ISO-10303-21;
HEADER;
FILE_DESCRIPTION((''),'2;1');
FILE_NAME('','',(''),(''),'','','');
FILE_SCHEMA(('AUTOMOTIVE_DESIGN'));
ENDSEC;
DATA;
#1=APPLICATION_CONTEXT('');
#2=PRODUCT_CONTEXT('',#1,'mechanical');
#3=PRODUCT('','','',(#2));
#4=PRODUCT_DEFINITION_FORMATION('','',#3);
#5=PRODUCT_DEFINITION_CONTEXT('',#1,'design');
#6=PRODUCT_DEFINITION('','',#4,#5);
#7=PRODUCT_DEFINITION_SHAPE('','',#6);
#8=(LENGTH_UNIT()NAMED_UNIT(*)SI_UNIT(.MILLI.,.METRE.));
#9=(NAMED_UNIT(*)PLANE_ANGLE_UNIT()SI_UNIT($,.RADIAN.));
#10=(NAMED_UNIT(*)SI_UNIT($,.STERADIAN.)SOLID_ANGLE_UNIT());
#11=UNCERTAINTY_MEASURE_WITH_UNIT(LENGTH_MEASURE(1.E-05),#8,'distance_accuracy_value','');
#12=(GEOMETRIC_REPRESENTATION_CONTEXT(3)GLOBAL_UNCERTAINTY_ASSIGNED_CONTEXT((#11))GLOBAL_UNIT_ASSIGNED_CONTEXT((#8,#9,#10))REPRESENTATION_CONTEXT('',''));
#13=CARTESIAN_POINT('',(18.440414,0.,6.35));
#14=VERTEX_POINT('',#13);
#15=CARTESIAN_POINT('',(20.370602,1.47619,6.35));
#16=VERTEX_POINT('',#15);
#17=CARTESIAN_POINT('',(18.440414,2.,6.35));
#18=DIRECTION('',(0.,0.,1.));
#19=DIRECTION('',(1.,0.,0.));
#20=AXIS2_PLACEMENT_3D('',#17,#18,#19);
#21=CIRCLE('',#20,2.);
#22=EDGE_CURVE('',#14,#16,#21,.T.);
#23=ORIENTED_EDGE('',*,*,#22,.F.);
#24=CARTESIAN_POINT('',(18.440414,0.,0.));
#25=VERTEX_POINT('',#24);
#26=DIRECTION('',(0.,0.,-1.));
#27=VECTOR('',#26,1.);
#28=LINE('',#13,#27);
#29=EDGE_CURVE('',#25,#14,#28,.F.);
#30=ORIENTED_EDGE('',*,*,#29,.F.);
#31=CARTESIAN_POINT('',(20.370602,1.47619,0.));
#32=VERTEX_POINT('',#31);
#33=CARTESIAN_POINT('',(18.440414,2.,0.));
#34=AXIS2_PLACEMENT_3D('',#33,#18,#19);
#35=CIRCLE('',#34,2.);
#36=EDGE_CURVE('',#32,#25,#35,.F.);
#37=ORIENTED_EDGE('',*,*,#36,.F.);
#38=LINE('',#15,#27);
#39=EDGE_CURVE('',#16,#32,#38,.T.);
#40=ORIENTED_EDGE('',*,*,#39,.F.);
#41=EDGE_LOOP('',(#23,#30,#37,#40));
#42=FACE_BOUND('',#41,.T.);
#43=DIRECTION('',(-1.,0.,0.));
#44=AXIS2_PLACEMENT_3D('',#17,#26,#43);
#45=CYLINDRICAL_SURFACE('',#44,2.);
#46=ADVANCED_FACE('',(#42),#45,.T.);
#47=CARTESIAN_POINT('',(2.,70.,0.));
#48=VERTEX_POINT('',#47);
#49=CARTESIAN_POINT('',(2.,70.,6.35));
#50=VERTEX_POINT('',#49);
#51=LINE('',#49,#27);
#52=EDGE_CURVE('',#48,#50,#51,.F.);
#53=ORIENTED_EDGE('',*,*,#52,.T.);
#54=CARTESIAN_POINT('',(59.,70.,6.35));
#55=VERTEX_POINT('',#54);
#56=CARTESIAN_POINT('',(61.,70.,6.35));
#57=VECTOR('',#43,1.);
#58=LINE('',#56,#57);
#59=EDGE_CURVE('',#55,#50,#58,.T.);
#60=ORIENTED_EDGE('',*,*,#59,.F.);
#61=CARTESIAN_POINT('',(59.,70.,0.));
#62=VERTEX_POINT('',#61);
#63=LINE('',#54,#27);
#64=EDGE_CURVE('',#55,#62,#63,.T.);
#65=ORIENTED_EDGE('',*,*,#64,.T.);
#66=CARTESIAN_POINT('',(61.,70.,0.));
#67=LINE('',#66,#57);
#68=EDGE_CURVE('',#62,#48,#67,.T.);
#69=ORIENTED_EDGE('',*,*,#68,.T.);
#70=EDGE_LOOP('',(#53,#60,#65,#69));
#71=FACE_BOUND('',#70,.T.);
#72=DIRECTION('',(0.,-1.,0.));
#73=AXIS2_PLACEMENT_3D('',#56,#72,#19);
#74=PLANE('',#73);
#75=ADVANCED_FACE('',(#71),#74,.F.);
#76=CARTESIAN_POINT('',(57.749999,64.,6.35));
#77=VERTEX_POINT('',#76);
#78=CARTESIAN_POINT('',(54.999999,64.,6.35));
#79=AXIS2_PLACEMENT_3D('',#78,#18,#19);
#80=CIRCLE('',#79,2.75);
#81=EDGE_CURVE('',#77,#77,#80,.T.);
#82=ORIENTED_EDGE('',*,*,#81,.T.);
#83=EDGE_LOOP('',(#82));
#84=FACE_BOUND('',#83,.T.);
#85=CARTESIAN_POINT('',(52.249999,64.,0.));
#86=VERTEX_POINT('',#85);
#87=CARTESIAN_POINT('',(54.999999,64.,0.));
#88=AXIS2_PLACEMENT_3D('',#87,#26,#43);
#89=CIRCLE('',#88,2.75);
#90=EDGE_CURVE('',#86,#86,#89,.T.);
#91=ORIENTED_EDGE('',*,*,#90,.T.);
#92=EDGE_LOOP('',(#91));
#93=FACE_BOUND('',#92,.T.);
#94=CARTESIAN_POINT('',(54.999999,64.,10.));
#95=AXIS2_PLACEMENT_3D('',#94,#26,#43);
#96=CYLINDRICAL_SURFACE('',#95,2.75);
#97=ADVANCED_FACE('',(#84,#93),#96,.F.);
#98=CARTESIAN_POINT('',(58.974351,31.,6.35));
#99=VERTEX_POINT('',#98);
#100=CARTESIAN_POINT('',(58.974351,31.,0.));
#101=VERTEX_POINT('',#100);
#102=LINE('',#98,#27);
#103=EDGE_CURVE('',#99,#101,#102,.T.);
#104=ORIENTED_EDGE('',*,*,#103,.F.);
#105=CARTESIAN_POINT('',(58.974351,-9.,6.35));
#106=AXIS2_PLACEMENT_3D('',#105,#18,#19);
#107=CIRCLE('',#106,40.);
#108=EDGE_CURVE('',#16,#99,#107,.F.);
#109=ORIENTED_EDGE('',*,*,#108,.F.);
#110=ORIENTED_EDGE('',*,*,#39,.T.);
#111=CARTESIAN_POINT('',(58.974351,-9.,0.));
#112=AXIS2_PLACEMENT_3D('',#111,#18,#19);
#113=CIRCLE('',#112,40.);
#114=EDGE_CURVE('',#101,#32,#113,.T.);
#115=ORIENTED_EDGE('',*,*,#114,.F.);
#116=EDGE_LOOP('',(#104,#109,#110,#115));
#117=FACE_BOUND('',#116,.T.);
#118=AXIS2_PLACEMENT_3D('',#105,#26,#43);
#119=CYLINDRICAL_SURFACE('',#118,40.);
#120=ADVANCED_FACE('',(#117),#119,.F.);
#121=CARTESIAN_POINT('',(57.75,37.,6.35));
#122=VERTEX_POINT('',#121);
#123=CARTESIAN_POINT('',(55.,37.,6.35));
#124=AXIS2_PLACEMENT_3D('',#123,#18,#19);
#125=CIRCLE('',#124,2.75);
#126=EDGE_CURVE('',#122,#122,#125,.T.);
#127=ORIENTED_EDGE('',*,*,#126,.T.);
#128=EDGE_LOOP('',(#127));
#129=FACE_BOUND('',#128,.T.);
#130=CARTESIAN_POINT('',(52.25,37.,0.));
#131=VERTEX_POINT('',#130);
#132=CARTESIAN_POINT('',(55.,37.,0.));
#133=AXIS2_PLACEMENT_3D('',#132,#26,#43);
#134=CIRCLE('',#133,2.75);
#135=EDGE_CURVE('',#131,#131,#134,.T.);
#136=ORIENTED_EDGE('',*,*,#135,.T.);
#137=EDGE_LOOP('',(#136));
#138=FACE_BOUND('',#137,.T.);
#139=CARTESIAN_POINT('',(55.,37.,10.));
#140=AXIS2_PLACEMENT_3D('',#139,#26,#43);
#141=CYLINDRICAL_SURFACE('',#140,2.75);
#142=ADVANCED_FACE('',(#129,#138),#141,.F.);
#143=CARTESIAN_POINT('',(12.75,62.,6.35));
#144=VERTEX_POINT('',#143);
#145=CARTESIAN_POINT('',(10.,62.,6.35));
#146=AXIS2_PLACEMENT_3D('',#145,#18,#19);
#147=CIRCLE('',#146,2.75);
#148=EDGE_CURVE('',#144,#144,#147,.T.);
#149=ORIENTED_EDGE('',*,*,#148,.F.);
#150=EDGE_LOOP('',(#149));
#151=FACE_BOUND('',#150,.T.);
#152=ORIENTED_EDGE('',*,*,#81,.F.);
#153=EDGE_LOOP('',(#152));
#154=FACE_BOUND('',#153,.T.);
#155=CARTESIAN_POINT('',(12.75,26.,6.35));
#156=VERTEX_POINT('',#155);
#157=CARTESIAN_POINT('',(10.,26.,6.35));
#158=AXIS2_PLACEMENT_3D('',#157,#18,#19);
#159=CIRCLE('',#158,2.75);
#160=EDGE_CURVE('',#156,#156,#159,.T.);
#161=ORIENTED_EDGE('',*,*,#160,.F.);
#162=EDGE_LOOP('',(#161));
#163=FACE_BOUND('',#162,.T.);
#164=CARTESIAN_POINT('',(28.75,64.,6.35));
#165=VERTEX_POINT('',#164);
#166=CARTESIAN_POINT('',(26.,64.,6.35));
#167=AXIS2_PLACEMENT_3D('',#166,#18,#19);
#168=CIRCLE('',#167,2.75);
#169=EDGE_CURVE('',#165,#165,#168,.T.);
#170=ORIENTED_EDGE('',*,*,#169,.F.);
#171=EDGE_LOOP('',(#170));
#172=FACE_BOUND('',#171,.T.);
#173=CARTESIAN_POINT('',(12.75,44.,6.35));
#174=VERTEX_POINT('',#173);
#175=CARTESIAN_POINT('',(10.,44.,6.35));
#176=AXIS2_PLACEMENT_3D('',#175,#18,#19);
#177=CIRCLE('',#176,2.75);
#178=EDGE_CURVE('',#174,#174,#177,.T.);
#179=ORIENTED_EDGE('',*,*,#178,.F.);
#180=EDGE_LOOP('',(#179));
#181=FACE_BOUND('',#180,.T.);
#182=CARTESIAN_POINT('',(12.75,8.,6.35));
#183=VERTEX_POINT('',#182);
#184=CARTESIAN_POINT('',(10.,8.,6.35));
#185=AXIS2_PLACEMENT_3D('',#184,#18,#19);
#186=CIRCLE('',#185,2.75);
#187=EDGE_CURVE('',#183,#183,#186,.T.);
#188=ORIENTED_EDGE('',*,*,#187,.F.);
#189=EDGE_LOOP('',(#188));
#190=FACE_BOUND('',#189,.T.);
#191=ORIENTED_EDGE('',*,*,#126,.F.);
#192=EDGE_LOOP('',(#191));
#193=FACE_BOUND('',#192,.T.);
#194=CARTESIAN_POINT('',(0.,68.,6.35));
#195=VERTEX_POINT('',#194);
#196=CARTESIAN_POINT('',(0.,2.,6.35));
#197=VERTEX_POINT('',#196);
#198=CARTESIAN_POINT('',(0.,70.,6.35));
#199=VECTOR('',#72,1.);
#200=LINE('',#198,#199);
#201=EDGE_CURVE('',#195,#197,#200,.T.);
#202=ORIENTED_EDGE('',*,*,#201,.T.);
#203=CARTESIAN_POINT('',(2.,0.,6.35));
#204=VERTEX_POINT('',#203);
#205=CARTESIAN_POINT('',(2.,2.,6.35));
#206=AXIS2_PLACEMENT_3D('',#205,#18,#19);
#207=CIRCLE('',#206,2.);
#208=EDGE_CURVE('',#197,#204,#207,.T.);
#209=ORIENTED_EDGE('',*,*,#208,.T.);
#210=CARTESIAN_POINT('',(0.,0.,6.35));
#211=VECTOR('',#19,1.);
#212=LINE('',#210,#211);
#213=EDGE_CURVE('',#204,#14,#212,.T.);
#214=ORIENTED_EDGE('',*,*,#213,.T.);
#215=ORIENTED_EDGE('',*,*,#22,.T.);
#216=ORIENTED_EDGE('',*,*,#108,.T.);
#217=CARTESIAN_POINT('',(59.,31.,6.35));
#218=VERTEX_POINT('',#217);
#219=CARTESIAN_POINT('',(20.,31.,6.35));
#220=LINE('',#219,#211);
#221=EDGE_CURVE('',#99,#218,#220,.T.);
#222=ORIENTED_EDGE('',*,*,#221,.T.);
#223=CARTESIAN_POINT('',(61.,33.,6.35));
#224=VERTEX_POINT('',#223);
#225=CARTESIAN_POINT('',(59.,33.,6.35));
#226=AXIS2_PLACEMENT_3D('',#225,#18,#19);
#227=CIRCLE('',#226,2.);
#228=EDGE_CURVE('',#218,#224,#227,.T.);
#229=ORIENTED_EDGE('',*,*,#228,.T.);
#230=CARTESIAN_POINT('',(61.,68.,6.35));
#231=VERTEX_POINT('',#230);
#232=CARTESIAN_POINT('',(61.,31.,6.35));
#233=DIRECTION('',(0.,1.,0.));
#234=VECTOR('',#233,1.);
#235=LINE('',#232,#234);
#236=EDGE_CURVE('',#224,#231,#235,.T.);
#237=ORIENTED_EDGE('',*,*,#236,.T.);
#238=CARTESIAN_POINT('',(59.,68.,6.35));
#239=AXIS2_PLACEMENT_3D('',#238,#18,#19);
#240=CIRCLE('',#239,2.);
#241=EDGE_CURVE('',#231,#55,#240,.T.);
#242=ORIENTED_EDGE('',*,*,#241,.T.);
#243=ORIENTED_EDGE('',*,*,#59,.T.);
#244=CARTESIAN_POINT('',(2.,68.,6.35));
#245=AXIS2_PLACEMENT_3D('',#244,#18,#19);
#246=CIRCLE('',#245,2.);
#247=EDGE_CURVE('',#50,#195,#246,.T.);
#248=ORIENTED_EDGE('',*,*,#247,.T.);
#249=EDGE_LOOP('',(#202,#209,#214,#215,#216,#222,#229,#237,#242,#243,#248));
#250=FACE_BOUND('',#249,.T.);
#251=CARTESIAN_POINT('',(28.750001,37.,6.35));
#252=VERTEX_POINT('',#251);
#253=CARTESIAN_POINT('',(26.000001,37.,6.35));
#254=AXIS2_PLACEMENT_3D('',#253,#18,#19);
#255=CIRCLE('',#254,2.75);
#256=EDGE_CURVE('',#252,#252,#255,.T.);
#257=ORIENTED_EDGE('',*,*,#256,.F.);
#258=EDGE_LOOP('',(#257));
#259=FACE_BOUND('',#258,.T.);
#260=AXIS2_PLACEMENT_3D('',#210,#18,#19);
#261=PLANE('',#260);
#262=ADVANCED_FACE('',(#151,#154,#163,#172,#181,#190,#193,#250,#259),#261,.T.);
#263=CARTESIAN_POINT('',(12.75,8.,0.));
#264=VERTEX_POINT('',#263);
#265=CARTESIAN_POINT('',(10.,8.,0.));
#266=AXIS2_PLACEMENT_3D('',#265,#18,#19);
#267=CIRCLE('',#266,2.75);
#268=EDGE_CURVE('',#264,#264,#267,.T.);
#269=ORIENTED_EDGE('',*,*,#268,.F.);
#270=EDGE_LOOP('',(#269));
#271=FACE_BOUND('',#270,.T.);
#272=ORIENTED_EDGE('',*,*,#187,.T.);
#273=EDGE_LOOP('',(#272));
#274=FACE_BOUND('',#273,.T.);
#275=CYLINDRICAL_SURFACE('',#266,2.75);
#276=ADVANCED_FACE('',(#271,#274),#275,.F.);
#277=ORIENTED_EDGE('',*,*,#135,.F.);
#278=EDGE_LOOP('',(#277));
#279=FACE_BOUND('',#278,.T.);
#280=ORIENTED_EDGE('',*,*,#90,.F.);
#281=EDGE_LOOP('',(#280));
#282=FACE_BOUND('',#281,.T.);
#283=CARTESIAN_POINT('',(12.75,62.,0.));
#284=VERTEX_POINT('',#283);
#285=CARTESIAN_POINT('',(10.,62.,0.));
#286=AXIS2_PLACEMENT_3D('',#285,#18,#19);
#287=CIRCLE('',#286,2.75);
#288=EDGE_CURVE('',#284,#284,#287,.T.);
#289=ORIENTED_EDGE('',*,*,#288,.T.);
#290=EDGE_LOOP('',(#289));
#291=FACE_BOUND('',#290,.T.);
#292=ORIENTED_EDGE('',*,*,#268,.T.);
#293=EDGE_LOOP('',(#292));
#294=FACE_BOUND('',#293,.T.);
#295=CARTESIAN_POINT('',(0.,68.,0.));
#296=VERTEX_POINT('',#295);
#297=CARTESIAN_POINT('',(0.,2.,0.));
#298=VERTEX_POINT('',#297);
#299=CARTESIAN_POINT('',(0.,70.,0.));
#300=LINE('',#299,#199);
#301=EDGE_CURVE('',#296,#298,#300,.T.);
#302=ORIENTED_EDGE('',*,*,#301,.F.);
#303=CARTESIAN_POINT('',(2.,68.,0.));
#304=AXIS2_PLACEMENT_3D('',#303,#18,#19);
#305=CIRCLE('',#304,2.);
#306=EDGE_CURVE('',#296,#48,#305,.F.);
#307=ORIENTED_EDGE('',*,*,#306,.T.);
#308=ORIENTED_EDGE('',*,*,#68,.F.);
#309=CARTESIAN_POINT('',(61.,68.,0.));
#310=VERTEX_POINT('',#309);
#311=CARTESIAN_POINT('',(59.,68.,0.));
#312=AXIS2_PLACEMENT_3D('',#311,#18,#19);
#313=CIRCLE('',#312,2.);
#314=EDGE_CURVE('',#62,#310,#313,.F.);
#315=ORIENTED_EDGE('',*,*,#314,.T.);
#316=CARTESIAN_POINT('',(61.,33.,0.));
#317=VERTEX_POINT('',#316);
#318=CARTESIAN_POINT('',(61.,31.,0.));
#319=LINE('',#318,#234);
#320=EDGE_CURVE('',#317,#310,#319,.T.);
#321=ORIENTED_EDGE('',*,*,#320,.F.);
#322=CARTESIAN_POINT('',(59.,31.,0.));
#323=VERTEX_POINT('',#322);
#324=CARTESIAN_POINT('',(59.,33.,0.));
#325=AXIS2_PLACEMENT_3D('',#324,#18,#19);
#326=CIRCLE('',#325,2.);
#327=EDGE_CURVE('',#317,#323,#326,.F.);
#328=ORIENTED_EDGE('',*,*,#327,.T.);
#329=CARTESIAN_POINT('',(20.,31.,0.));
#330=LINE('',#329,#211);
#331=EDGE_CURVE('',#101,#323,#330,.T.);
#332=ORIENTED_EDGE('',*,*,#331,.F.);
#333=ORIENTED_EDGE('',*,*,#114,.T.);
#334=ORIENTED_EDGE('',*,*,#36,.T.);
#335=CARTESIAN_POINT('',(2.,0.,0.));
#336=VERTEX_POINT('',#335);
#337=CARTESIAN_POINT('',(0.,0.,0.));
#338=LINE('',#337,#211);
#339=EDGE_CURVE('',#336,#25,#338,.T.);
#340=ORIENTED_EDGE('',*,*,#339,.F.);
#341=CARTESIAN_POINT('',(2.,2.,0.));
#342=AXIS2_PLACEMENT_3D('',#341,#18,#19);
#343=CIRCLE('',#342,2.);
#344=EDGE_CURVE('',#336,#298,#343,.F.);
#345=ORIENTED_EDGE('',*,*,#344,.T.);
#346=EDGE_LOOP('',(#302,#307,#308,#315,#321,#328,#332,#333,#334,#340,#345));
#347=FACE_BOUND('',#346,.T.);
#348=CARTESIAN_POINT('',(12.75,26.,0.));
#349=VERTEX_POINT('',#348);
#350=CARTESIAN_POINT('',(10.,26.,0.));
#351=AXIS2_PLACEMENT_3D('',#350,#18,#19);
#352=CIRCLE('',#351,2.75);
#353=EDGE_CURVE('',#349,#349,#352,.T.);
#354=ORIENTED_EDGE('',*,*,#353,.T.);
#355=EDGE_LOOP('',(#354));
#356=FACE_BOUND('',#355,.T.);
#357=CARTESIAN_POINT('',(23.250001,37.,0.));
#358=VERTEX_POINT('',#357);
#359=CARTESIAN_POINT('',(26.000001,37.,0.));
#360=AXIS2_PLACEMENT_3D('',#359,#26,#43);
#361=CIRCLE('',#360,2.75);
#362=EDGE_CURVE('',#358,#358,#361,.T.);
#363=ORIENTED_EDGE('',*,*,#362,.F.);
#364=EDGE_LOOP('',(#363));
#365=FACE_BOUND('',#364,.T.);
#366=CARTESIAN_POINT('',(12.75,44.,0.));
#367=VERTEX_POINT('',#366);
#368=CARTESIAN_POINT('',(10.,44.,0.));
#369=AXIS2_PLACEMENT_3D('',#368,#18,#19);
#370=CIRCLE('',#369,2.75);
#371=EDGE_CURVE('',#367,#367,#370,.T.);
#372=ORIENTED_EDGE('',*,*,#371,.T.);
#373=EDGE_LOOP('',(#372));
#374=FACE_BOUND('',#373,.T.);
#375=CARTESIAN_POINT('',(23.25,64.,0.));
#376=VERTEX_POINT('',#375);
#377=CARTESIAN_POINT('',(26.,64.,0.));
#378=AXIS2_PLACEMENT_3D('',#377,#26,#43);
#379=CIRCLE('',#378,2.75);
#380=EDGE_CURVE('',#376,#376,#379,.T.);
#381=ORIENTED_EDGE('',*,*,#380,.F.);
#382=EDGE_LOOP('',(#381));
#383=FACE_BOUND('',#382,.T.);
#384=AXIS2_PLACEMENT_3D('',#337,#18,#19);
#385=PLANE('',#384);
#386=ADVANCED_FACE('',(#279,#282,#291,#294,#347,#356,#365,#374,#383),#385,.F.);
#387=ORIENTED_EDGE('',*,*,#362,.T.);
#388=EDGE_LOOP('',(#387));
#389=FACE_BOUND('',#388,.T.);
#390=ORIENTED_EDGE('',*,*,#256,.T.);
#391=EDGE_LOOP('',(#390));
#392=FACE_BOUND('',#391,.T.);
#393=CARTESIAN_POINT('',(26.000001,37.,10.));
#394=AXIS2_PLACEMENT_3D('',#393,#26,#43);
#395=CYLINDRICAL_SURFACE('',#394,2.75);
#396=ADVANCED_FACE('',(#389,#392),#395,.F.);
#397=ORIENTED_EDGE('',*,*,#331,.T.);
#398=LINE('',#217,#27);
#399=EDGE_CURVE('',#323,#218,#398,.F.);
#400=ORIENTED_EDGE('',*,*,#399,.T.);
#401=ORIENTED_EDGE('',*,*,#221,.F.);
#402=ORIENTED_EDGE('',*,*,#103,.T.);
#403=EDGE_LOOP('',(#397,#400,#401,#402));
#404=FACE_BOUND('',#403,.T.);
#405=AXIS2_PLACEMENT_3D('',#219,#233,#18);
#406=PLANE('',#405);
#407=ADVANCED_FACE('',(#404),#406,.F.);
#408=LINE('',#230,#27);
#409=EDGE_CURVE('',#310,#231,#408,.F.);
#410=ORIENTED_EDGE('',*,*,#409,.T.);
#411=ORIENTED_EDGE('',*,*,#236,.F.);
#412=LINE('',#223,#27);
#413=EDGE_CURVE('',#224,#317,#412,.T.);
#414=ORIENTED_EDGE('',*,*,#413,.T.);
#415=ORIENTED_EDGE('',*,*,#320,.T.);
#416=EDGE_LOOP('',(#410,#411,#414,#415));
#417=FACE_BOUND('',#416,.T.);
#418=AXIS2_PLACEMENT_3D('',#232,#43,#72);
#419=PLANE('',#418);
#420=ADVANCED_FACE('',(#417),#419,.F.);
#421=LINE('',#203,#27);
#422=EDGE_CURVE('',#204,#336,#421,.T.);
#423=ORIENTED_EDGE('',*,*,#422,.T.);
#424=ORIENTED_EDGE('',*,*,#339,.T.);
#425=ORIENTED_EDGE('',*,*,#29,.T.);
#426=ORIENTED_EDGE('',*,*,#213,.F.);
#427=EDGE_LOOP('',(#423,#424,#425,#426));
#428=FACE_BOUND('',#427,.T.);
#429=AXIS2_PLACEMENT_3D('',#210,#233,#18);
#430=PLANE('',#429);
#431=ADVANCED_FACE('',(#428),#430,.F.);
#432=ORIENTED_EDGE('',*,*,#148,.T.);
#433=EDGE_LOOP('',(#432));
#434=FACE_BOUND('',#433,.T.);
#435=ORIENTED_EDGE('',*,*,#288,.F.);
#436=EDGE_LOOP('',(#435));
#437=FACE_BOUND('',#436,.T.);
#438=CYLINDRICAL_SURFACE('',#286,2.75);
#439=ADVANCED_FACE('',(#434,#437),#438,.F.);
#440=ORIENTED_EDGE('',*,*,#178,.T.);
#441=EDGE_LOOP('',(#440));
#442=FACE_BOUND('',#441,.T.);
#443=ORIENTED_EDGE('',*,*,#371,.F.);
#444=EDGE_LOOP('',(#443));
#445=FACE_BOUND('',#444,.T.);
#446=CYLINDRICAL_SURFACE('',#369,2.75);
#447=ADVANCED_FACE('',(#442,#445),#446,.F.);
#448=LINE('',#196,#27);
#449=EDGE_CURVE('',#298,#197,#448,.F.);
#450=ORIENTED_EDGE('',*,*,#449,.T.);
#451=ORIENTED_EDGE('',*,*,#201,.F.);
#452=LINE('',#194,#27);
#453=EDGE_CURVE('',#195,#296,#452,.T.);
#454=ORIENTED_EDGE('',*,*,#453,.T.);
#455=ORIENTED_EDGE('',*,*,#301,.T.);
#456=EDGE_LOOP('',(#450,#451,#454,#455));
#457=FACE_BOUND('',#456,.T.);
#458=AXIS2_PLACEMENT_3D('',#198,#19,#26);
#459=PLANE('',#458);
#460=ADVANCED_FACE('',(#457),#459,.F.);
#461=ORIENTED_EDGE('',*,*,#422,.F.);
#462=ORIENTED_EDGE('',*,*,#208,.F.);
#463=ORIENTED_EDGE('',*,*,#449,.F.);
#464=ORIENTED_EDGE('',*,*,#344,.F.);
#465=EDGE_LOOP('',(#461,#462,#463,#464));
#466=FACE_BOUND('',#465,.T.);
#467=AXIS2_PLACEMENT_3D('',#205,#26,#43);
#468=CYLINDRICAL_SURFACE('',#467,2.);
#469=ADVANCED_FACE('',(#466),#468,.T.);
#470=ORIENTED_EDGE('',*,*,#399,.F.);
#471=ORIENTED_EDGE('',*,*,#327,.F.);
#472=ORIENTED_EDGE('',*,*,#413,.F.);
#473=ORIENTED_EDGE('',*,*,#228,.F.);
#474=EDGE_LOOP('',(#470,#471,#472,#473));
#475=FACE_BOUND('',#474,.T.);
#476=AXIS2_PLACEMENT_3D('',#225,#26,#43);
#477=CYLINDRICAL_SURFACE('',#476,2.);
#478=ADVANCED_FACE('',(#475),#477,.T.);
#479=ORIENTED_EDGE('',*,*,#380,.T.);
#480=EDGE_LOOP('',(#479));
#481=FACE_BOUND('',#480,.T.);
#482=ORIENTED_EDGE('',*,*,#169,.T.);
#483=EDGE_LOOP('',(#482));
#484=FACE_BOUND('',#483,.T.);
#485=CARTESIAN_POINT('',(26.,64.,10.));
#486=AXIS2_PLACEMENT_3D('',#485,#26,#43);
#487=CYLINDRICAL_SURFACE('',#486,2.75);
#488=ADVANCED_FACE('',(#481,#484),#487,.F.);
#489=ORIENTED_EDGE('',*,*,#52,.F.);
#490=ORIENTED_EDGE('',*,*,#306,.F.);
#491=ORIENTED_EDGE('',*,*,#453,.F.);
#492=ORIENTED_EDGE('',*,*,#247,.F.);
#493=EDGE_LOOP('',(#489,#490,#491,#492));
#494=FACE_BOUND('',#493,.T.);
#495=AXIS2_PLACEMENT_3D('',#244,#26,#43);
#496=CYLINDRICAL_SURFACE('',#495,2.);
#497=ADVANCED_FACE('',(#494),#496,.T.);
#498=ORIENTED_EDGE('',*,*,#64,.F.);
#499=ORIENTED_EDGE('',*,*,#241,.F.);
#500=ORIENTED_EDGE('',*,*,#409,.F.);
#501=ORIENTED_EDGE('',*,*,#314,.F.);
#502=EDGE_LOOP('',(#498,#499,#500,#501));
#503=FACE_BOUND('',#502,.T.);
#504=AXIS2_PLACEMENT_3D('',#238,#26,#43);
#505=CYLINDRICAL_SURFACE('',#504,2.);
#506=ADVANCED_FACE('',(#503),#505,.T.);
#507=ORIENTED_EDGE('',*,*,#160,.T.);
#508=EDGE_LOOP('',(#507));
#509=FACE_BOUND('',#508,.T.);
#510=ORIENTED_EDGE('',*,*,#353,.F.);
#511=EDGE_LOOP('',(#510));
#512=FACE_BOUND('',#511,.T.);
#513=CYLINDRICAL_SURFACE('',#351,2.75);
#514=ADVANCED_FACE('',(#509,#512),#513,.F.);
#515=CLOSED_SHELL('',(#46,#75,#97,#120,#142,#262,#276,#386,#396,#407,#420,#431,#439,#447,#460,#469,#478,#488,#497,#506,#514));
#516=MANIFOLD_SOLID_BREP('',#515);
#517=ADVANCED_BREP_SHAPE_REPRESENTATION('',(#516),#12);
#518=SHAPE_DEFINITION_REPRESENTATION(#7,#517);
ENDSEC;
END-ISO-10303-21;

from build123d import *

# Parameters (mm, degrees)
BOSS_EXTRUDE1_DEPTH = 6.35
SKETCH4_R           = 2.75
CUT_EXTRUDE1_DEPTH  = 10
SKETCH5_R           = 2.75
CUT_EXTRUDE2_DEPTH  = 94.06622642
FILLET1_R           = 40
FILLET2_R           = 2


with BuildPart() as part:
    # Sketch2 → Boss-Extrude1 (new body)
    with BuildSketch(Plane.XY):
        Polygon((0, 0), (20, 0), (20, 31), (61, 31), (61, 70), (0, 70), align=None)
    extrude(amount=BOSS_EXTRUDE1_DEPTH)

    # Sketch4 → Cut-Extrude1 (cut)
    with BuildSketch(Plane(origin=(0, 0, 0), x_dir=(-1, 0, 0), z_dir=(0, 0, -1))):
        with Locations((-26, 64)):
            Circle(SKETCH4_R)
        with Locations((-54.999998701, 64)):
            Circle(SKETCH4_R)
        with Locations((-55, 37)):
            Circle(SKETCH4_R)
        with Locations((-26.000001299, 37)):
            Circle(SKETCH4_R)
    extrude(amount=-CUT_EXTRUDE1_DEPTH, mode=Mode.SUBTRACT)

    # Sketch5 → Cut-Extrude2 (cut, through all)
    with BuildSketch(Plane.XY.offset(6.35)):
        with Locations((10, 8)):
            Circle(SKETCH5_R)
        with Locations((10, 26)):
            Circle(SKETCH5_R)
        with Locations((10, 44)):
            Circle(SKETCH5_R)
        with Locations((10, 62)):
            Circle(SKETCH5_R)
    extrude(amount=-CUT_EXTRUDE2_DEPTH, mode=Mode.SUBTRACT)

    # Fillet1
    # the kernel refuses this fillet: 40 mm, written as the material it adds along each edge
    with BuildSketch(Plane(origin=(20, 31, 0), x_dir=(0, -1, 0), z_dir=(0, 0, 1))) as fillet1_piece_1:
        with BuildLine():
            CenterArc((40, 38.97435054), FILLET1_R, 180, 76.997121837)
            Line((0, 38.97435054), (-0.8, 38.97435054))
            Line((-0.8, 38.97435054), (-0.8, 0))
            Line((-0.8, 0), (0, -0.8))
            ThreePointArc((0, -0.8), (15.5, -0.8), (30.82, -0.779487011))
            Line((30.82, -0.779487011), (31, 0))
        make_face()
    extrude(amount=6.35)

    # Fillet2
    fillet2_edges = [part.edges().sort_by_distance(p)[0] for p in [
        (0, 70, 3.175),
        (61, 70, 3.175),
        (61, 31, 3.175),
        (20, 0, 3.175),
        (0, 0, 3.175),
    ]]
    fillet(fillet2_edges, radius=FILLET2_R)


solid = part.part
